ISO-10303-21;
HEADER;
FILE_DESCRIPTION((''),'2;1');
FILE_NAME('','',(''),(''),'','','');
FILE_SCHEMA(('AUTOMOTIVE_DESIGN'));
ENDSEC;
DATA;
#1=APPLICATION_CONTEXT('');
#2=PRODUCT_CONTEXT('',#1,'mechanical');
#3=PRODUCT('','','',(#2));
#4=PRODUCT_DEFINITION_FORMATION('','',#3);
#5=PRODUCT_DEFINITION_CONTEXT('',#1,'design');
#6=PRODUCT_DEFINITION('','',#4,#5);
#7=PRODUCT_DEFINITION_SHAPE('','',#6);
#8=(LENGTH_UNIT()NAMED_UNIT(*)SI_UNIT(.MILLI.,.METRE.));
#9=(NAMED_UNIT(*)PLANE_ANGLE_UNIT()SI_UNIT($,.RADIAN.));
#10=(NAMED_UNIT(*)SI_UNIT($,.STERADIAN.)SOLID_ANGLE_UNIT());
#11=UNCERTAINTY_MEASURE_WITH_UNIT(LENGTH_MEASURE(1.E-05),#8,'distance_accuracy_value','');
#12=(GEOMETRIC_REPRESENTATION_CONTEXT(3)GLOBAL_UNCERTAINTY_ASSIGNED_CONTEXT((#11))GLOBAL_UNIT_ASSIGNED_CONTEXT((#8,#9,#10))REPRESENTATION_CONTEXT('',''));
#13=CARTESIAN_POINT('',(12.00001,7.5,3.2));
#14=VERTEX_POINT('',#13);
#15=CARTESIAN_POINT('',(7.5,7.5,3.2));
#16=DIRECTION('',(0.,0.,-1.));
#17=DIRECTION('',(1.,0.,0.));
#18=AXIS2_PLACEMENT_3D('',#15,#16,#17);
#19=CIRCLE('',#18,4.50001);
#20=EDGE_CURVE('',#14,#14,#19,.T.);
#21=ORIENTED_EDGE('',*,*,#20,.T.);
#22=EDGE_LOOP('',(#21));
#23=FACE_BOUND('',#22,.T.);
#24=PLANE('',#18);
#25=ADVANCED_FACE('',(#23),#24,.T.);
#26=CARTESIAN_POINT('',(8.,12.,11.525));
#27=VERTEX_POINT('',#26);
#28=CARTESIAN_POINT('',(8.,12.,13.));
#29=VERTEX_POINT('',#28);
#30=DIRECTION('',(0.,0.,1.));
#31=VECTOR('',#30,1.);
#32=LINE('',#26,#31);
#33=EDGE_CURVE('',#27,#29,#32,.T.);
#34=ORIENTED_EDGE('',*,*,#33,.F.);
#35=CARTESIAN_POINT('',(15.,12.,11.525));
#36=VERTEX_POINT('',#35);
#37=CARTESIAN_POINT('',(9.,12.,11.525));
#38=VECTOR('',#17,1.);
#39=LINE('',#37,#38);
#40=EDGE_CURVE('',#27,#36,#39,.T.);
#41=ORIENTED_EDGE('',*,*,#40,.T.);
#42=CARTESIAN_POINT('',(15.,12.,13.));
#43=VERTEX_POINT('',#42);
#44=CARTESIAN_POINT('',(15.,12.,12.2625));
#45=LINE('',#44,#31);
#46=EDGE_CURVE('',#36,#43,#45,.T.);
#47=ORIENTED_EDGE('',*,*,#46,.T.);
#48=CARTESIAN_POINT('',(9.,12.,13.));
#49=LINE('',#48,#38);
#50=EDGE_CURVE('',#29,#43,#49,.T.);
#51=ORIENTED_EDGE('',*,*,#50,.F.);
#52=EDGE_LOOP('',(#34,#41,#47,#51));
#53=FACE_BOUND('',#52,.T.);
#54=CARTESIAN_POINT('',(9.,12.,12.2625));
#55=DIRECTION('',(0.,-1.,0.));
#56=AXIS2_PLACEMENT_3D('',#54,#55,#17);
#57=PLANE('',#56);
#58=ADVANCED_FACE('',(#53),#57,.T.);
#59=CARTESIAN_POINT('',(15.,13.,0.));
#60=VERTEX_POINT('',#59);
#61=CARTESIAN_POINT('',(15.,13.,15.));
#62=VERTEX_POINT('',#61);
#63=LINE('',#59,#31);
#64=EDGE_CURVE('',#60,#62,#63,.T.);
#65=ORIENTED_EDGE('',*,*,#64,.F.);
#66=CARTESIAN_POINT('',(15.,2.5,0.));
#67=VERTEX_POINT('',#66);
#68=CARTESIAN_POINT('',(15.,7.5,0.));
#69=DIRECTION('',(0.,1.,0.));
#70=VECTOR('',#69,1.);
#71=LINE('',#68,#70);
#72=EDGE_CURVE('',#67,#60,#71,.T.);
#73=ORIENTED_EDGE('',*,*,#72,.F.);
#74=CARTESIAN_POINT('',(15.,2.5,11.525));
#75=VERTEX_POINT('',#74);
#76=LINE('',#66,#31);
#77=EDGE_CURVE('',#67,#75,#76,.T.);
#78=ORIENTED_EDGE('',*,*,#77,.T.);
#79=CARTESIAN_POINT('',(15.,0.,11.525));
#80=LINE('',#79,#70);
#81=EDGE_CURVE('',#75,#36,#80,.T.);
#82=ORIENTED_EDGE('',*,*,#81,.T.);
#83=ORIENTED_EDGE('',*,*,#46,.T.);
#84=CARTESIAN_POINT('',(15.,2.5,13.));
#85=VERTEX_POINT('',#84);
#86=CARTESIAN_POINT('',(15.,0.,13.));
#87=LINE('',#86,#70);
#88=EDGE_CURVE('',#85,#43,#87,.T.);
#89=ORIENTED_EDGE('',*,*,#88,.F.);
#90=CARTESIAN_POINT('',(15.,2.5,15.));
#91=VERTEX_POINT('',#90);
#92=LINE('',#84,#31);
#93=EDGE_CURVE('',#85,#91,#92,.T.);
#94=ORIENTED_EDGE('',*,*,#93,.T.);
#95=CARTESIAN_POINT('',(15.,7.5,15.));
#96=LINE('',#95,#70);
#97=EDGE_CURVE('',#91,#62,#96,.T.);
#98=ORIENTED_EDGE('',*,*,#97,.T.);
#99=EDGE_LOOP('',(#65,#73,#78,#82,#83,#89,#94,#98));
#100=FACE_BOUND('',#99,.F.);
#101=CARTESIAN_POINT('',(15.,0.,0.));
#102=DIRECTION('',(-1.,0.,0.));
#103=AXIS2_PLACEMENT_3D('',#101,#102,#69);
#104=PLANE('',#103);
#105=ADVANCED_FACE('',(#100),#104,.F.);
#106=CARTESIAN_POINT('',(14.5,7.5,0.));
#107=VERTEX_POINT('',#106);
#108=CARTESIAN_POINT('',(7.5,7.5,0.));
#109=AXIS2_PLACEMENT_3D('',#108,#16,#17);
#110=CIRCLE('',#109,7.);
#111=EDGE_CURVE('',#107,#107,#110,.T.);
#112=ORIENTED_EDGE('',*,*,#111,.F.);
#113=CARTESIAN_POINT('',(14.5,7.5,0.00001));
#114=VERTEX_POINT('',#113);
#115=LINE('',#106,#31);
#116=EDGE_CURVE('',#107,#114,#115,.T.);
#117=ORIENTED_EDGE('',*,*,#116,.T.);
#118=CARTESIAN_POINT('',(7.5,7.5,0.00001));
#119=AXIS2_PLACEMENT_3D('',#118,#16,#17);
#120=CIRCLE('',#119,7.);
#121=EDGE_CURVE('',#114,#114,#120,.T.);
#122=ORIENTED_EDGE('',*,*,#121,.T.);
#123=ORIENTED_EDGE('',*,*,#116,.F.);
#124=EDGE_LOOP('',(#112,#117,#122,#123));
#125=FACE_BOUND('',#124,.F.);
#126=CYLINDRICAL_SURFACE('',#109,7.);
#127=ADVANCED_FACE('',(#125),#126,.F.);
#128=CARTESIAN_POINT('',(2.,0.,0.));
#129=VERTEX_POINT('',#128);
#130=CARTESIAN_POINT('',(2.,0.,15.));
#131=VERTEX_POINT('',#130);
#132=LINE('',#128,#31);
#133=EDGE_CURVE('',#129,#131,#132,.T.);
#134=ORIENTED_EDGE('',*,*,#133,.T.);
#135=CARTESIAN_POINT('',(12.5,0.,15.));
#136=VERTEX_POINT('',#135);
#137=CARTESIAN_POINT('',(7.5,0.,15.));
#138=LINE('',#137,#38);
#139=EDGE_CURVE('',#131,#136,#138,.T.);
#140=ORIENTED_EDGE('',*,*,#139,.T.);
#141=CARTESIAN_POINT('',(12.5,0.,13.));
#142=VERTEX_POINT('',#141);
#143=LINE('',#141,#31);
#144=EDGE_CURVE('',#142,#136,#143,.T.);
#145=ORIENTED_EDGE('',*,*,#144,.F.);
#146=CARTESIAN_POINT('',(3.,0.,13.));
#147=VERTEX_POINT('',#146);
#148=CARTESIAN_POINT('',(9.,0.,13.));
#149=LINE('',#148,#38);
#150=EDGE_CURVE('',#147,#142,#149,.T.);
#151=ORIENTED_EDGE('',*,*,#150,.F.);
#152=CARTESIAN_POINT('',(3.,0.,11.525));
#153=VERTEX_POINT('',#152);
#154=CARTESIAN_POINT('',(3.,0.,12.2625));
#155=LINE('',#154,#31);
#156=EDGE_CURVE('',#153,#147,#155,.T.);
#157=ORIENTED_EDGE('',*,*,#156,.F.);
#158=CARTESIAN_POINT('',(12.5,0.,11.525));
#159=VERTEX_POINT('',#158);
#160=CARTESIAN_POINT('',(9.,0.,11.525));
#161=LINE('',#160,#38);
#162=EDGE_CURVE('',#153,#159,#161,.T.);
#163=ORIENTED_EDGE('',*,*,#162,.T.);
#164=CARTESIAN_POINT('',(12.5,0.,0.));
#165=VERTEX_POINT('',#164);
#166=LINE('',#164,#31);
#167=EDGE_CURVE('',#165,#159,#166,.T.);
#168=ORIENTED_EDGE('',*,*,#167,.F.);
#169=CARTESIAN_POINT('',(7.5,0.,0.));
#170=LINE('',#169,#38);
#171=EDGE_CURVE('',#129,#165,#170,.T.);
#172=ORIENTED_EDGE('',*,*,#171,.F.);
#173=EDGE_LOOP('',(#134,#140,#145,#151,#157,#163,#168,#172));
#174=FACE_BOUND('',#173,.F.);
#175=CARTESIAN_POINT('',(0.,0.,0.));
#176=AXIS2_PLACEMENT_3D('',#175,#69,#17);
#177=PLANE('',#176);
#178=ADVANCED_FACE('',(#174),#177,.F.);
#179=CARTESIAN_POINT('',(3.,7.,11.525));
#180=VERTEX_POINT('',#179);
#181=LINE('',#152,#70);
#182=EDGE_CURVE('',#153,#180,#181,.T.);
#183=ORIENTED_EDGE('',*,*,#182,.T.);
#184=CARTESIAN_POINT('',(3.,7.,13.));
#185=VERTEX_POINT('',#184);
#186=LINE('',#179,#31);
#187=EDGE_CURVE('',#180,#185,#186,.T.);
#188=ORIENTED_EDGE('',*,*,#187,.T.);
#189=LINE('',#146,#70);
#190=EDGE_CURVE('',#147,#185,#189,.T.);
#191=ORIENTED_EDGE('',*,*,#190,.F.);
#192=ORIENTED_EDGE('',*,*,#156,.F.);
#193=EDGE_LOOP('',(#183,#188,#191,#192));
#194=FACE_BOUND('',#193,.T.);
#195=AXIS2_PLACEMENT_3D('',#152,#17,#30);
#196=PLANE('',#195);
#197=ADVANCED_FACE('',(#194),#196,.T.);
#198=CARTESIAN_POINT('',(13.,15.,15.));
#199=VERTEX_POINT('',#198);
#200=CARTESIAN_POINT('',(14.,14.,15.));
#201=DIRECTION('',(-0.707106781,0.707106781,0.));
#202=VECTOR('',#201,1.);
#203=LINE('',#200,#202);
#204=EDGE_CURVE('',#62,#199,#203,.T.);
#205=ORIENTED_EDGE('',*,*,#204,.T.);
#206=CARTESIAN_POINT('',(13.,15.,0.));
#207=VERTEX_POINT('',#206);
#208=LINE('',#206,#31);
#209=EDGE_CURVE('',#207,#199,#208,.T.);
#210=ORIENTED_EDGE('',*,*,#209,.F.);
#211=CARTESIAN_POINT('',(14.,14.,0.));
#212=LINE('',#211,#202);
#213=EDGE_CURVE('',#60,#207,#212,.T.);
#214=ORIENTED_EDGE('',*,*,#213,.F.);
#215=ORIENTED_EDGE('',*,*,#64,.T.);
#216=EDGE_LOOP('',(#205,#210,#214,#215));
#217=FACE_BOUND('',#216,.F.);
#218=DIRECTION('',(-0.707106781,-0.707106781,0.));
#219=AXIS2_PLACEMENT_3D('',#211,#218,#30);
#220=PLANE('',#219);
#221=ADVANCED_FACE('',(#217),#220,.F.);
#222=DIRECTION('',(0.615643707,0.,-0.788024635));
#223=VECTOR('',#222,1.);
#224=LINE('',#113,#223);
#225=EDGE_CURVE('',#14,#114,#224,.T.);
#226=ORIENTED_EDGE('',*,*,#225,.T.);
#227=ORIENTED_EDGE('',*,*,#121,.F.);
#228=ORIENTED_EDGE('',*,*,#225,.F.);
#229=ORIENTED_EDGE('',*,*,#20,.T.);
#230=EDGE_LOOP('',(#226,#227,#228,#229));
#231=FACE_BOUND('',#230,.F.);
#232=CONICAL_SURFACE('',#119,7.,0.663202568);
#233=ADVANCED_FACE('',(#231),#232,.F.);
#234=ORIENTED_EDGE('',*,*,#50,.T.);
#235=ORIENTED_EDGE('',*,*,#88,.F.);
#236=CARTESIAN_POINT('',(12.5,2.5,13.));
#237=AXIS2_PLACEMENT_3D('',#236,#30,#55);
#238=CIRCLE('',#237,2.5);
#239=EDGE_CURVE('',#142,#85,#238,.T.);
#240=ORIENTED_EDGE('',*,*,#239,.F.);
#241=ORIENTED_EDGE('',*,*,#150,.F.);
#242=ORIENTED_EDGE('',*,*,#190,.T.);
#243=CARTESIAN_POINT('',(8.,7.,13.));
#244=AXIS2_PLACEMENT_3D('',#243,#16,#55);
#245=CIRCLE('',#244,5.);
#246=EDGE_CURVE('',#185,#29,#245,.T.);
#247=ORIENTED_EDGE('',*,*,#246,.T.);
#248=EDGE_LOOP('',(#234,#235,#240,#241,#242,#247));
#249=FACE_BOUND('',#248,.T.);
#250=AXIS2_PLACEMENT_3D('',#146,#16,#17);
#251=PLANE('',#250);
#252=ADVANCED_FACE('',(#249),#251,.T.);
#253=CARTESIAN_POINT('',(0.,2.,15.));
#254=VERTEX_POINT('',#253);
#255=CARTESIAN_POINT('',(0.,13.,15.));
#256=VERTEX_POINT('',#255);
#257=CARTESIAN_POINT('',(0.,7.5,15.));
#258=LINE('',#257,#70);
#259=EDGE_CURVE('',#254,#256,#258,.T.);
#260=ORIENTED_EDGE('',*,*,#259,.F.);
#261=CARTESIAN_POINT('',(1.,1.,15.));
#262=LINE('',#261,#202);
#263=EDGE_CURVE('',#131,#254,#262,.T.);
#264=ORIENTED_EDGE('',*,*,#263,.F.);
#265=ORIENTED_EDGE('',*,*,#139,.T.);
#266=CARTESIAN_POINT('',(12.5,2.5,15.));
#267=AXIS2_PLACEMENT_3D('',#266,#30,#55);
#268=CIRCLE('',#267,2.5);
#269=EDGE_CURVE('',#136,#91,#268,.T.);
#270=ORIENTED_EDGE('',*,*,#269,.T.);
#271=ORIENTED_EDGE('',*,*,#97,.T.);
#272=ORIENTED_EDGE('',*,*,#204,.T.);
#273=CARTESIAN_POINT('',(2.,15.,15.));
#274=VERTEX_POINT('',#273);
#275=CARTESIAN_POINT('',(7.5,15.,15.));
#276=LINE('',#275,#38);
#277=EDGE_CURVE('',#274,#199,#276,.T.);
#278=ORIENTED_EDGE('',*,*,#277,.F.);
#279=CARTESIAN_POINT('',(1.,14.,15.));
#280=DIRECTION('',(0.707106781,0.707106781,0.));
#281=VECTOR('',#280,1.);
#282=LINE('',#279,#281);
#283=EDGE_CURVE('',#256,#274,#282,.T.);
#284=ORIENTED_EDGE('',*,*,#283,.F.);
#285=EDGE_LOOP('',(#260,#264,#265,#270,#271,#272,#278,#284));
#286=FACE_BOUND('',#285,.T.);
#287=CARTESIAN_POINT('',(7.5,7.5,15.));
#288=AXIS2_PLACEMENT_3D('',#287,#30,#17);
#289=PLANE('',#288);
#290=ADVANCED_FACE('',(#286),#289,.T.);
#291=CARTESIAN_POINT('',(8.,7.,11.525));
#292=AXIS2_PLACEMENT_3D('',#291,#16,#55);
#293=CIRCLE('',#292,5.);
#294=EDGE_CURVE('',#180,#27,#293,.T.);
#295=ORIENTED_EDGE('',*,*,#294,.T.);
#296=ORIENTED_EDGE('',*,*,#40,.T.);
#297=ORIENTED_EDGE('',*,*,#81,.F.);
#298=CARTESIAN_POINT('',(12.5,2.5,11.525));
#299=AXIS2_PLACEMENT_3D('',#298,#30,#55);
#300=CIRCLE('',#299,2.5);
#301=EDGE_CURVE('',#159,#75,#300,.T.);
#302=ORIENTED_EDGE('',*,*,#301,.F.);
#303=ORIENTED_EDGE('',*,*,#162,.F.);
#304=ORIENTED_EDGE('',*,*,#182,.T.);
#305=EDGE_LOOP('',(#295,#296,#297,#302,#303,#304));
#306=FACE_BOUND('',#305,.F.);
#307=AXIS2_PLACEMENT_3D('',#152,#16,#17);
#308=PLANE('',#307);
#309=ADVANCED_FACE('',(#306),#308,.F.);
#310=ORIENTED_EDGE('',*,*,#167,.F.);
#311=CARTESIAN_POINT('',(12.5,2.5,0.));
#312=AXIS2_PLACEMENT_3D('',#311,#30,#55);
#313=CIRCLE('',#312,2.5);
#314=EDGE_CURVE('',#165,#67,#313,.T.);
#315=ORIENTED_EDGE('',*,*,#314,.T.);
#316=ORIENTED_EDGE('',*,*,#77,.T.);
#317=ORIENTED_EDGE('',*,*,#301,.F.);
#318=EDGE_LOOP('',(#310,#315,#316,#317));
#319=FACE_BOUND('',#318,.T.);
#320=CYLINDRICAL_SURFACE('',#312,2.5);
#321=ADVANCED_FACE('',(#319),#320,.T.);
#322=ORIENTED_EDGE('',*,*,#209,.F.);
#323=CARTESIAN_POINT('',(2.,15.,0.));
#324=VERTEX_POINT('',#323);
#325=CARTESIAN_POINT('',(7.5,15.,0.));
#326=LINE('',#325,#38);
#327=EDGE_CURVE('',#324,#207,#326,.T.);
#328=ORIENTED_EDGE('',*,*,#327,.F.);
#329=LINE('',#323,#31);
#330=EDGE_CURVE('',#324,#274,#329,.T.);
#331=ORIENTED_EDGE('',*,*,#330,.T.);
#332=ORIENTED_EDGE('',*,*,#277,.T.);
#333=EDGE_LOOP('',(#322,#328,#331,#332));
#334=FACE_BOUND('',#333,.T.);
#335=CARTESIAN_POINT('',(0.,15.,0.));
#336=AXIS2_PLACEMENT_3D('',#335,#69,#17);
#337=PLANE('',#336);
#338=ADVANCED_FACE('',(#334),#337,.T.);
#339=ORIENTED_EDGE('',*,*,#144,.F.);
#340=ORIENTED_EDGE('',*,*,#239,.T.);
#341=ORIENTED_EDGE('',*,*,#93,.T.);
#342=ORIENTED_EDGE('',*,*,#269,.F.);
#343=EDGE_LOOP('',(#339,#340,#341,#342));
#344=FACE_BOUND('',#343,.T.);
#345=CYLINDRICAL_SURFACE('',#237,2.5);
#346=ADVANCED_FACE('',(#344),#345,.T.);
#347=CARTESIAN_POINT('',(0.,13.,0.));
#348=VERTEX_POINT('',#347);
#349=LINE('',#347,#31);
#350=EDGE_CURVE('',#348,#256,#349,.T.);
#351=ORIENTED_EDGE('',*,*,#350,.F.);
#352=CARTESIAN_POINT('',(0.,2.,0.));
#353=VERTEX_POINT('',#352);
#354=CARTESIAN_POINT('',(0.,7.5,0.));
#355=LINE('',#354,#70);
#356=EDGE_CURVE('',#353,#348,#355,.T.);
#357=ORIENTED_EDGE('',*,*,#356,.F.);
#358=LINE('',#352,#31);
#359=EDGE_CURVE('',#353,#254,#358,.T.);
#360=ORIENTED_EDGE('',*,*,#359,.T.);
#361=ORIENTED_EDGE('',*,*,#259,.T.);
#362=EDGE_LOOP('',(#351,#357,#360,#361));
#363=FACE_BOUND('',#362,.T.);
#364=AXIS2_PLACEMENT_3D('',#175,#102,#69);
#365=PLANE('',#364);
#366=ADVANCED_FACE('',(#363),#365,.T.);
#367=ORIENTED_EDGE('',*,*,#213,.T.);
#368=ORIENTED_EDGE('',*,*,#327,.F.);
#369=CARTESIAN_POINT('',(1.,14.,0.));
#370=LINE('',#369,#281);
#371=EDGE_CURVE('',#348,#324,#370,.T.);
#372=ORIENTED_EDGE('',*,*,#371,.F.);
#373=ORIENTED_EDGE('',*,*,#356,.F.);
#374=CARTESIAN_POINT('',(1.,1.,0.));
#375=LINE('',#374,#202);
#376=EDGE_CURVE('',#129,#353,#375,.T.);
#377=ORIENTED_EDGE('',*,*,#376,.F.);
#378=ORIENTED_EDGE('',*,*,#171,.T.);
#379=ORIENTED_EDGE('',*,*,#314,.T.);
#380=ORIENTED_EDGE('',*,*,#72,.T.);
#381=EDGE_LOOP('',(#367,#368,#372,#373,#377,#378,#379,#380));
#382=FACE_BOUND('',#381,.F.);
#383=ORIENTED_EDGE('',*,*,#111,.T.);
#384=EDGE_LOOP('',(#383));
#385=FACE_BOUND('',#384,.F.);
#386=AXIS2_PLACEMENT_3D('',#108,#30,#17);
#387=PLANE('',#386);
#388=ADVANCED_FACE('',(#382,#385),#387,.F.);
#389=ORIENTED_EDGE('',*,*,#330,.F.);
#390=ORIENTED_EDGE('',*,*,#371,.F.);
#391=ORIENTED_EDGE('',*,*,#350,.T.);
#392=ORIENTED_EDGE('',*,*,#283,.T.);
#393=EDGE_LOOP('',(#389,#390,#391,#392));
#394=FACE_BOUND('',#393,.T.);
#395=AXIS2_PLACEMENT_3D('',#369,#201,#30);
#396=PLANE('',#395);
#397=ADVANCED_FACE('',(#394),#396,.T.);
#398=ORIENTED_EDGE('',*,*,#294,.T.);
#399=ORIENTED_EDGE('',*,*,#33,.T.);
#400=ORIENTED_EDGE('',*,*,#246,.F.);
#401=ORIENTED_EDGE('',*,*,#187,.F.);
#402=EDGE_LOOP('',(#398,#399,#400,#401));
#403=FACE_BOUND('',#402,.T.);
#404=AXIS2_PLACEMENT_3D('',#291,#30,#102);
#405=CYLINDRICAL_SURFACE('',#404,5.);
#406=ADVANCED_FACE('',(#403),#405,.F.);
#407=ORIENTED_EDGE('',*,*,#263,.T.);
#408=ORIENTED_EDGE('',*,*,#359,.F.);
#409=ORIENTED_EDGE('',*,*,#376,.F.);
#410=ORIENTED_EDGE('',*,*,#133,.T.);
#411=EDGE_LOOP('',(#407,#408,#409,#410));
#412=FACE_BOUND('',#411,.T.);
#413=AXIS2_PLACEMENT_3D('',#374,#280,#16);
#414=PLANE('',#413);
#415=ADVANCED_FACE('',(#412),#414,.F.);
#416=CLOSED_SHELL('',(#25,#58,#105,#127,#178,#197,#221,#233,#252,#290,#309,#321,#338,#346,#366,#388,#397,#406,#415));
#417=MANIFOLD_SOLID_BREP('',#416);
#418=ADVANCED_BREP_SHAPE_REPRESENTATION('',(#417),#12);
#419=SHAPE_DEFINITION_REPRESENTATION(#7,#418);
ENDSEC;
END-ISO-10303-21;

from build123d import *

# Parameters (mm, degrees)
F0_W     = 15
F0_H     = 15
F1_DEPTH = 15
F2_W     = 12
F2_H     = 1.475
F3_DEPTH = 12
F4_R     = 5
F5_R     = 7
F6_DEPTH = 3.2
F7_SIZE2 = 3.19999
F7_SIZE  = 2.49999
F8_R     = 2.5
F9_SIZE  = 2


# Not quite as in the source:
# - a fillet or chamfer is up to 0.001 mm smaller than in the source, because OpenCascade refuses the exact size


with BuildPart() as f1:
    # F0 (on Top) → F1 (new body)
    with BuildSketch(Plane.XY):
        with Locations((7.5, 7.5)):
            Rectangle(F0_W, F0_H)
    extrude(amount=F1_DEPTH)

    # F2 (on face) → F3 (cut)
    with BuildSketch(Plane.XZ):
        with Locations((9, 12.2625)):
            Rectangle(F2_W, F2_H)
    extrude(amount=-F3_DEPTH, mode=Mode.SUBTRACT)

    # F4
    f4_edges = [f1.edges().sort_by_distance(p)[0] for p in [
        (3, 12, 12.2625),
    ]]
    fillet(f4_edges, radius=F4_R)

    # F5 (on face) → F6 (cut)
    with BuildSketch(Plane(origin=(0, 0, 0), x_dir=(1, 0, 0), z_dir=(0, 0, -1))):
        with Locations((7.5, -7.5)):
            Circle(F5_R)
    extrude(amount=-F6_DEPTH, mode=Mode.SUBTRACT)

    # F7 (size 2.5 and 3.2 in the source; OpenCascade refuses exactly that, so slightly less here)
    f7_edges = [f1.edges().sort_by_distance(p)[0] for p in [
        (0.5, 7.5, 3.2),
    ]]
    f7_side = f1.faces().sort_by_distance((7.5, 7.5, 3.2))[0]
    chamfer(f7_edges, length=F7_SIZE, length2=F7_SIZE2, reference=f7_side)

    # F8
    f8_edges = [f1.edges().sort_by_distance(p)[0] for p in [
        (15, 0, 14),
        (15, 0, 5.7625),
    ]]
    fillet(f8_edges, radius=F8_R)

    # F9
    f9_edges = [f1.edges().sort_by_distance(p)[0] for p in [
        (15, 15, 7.5),
        (0, 15, 7.5),
        (0, 0, 7.5),
    ]]
    chamfer(f9_edges, length=F9_SIZE)


solid = f1.part
